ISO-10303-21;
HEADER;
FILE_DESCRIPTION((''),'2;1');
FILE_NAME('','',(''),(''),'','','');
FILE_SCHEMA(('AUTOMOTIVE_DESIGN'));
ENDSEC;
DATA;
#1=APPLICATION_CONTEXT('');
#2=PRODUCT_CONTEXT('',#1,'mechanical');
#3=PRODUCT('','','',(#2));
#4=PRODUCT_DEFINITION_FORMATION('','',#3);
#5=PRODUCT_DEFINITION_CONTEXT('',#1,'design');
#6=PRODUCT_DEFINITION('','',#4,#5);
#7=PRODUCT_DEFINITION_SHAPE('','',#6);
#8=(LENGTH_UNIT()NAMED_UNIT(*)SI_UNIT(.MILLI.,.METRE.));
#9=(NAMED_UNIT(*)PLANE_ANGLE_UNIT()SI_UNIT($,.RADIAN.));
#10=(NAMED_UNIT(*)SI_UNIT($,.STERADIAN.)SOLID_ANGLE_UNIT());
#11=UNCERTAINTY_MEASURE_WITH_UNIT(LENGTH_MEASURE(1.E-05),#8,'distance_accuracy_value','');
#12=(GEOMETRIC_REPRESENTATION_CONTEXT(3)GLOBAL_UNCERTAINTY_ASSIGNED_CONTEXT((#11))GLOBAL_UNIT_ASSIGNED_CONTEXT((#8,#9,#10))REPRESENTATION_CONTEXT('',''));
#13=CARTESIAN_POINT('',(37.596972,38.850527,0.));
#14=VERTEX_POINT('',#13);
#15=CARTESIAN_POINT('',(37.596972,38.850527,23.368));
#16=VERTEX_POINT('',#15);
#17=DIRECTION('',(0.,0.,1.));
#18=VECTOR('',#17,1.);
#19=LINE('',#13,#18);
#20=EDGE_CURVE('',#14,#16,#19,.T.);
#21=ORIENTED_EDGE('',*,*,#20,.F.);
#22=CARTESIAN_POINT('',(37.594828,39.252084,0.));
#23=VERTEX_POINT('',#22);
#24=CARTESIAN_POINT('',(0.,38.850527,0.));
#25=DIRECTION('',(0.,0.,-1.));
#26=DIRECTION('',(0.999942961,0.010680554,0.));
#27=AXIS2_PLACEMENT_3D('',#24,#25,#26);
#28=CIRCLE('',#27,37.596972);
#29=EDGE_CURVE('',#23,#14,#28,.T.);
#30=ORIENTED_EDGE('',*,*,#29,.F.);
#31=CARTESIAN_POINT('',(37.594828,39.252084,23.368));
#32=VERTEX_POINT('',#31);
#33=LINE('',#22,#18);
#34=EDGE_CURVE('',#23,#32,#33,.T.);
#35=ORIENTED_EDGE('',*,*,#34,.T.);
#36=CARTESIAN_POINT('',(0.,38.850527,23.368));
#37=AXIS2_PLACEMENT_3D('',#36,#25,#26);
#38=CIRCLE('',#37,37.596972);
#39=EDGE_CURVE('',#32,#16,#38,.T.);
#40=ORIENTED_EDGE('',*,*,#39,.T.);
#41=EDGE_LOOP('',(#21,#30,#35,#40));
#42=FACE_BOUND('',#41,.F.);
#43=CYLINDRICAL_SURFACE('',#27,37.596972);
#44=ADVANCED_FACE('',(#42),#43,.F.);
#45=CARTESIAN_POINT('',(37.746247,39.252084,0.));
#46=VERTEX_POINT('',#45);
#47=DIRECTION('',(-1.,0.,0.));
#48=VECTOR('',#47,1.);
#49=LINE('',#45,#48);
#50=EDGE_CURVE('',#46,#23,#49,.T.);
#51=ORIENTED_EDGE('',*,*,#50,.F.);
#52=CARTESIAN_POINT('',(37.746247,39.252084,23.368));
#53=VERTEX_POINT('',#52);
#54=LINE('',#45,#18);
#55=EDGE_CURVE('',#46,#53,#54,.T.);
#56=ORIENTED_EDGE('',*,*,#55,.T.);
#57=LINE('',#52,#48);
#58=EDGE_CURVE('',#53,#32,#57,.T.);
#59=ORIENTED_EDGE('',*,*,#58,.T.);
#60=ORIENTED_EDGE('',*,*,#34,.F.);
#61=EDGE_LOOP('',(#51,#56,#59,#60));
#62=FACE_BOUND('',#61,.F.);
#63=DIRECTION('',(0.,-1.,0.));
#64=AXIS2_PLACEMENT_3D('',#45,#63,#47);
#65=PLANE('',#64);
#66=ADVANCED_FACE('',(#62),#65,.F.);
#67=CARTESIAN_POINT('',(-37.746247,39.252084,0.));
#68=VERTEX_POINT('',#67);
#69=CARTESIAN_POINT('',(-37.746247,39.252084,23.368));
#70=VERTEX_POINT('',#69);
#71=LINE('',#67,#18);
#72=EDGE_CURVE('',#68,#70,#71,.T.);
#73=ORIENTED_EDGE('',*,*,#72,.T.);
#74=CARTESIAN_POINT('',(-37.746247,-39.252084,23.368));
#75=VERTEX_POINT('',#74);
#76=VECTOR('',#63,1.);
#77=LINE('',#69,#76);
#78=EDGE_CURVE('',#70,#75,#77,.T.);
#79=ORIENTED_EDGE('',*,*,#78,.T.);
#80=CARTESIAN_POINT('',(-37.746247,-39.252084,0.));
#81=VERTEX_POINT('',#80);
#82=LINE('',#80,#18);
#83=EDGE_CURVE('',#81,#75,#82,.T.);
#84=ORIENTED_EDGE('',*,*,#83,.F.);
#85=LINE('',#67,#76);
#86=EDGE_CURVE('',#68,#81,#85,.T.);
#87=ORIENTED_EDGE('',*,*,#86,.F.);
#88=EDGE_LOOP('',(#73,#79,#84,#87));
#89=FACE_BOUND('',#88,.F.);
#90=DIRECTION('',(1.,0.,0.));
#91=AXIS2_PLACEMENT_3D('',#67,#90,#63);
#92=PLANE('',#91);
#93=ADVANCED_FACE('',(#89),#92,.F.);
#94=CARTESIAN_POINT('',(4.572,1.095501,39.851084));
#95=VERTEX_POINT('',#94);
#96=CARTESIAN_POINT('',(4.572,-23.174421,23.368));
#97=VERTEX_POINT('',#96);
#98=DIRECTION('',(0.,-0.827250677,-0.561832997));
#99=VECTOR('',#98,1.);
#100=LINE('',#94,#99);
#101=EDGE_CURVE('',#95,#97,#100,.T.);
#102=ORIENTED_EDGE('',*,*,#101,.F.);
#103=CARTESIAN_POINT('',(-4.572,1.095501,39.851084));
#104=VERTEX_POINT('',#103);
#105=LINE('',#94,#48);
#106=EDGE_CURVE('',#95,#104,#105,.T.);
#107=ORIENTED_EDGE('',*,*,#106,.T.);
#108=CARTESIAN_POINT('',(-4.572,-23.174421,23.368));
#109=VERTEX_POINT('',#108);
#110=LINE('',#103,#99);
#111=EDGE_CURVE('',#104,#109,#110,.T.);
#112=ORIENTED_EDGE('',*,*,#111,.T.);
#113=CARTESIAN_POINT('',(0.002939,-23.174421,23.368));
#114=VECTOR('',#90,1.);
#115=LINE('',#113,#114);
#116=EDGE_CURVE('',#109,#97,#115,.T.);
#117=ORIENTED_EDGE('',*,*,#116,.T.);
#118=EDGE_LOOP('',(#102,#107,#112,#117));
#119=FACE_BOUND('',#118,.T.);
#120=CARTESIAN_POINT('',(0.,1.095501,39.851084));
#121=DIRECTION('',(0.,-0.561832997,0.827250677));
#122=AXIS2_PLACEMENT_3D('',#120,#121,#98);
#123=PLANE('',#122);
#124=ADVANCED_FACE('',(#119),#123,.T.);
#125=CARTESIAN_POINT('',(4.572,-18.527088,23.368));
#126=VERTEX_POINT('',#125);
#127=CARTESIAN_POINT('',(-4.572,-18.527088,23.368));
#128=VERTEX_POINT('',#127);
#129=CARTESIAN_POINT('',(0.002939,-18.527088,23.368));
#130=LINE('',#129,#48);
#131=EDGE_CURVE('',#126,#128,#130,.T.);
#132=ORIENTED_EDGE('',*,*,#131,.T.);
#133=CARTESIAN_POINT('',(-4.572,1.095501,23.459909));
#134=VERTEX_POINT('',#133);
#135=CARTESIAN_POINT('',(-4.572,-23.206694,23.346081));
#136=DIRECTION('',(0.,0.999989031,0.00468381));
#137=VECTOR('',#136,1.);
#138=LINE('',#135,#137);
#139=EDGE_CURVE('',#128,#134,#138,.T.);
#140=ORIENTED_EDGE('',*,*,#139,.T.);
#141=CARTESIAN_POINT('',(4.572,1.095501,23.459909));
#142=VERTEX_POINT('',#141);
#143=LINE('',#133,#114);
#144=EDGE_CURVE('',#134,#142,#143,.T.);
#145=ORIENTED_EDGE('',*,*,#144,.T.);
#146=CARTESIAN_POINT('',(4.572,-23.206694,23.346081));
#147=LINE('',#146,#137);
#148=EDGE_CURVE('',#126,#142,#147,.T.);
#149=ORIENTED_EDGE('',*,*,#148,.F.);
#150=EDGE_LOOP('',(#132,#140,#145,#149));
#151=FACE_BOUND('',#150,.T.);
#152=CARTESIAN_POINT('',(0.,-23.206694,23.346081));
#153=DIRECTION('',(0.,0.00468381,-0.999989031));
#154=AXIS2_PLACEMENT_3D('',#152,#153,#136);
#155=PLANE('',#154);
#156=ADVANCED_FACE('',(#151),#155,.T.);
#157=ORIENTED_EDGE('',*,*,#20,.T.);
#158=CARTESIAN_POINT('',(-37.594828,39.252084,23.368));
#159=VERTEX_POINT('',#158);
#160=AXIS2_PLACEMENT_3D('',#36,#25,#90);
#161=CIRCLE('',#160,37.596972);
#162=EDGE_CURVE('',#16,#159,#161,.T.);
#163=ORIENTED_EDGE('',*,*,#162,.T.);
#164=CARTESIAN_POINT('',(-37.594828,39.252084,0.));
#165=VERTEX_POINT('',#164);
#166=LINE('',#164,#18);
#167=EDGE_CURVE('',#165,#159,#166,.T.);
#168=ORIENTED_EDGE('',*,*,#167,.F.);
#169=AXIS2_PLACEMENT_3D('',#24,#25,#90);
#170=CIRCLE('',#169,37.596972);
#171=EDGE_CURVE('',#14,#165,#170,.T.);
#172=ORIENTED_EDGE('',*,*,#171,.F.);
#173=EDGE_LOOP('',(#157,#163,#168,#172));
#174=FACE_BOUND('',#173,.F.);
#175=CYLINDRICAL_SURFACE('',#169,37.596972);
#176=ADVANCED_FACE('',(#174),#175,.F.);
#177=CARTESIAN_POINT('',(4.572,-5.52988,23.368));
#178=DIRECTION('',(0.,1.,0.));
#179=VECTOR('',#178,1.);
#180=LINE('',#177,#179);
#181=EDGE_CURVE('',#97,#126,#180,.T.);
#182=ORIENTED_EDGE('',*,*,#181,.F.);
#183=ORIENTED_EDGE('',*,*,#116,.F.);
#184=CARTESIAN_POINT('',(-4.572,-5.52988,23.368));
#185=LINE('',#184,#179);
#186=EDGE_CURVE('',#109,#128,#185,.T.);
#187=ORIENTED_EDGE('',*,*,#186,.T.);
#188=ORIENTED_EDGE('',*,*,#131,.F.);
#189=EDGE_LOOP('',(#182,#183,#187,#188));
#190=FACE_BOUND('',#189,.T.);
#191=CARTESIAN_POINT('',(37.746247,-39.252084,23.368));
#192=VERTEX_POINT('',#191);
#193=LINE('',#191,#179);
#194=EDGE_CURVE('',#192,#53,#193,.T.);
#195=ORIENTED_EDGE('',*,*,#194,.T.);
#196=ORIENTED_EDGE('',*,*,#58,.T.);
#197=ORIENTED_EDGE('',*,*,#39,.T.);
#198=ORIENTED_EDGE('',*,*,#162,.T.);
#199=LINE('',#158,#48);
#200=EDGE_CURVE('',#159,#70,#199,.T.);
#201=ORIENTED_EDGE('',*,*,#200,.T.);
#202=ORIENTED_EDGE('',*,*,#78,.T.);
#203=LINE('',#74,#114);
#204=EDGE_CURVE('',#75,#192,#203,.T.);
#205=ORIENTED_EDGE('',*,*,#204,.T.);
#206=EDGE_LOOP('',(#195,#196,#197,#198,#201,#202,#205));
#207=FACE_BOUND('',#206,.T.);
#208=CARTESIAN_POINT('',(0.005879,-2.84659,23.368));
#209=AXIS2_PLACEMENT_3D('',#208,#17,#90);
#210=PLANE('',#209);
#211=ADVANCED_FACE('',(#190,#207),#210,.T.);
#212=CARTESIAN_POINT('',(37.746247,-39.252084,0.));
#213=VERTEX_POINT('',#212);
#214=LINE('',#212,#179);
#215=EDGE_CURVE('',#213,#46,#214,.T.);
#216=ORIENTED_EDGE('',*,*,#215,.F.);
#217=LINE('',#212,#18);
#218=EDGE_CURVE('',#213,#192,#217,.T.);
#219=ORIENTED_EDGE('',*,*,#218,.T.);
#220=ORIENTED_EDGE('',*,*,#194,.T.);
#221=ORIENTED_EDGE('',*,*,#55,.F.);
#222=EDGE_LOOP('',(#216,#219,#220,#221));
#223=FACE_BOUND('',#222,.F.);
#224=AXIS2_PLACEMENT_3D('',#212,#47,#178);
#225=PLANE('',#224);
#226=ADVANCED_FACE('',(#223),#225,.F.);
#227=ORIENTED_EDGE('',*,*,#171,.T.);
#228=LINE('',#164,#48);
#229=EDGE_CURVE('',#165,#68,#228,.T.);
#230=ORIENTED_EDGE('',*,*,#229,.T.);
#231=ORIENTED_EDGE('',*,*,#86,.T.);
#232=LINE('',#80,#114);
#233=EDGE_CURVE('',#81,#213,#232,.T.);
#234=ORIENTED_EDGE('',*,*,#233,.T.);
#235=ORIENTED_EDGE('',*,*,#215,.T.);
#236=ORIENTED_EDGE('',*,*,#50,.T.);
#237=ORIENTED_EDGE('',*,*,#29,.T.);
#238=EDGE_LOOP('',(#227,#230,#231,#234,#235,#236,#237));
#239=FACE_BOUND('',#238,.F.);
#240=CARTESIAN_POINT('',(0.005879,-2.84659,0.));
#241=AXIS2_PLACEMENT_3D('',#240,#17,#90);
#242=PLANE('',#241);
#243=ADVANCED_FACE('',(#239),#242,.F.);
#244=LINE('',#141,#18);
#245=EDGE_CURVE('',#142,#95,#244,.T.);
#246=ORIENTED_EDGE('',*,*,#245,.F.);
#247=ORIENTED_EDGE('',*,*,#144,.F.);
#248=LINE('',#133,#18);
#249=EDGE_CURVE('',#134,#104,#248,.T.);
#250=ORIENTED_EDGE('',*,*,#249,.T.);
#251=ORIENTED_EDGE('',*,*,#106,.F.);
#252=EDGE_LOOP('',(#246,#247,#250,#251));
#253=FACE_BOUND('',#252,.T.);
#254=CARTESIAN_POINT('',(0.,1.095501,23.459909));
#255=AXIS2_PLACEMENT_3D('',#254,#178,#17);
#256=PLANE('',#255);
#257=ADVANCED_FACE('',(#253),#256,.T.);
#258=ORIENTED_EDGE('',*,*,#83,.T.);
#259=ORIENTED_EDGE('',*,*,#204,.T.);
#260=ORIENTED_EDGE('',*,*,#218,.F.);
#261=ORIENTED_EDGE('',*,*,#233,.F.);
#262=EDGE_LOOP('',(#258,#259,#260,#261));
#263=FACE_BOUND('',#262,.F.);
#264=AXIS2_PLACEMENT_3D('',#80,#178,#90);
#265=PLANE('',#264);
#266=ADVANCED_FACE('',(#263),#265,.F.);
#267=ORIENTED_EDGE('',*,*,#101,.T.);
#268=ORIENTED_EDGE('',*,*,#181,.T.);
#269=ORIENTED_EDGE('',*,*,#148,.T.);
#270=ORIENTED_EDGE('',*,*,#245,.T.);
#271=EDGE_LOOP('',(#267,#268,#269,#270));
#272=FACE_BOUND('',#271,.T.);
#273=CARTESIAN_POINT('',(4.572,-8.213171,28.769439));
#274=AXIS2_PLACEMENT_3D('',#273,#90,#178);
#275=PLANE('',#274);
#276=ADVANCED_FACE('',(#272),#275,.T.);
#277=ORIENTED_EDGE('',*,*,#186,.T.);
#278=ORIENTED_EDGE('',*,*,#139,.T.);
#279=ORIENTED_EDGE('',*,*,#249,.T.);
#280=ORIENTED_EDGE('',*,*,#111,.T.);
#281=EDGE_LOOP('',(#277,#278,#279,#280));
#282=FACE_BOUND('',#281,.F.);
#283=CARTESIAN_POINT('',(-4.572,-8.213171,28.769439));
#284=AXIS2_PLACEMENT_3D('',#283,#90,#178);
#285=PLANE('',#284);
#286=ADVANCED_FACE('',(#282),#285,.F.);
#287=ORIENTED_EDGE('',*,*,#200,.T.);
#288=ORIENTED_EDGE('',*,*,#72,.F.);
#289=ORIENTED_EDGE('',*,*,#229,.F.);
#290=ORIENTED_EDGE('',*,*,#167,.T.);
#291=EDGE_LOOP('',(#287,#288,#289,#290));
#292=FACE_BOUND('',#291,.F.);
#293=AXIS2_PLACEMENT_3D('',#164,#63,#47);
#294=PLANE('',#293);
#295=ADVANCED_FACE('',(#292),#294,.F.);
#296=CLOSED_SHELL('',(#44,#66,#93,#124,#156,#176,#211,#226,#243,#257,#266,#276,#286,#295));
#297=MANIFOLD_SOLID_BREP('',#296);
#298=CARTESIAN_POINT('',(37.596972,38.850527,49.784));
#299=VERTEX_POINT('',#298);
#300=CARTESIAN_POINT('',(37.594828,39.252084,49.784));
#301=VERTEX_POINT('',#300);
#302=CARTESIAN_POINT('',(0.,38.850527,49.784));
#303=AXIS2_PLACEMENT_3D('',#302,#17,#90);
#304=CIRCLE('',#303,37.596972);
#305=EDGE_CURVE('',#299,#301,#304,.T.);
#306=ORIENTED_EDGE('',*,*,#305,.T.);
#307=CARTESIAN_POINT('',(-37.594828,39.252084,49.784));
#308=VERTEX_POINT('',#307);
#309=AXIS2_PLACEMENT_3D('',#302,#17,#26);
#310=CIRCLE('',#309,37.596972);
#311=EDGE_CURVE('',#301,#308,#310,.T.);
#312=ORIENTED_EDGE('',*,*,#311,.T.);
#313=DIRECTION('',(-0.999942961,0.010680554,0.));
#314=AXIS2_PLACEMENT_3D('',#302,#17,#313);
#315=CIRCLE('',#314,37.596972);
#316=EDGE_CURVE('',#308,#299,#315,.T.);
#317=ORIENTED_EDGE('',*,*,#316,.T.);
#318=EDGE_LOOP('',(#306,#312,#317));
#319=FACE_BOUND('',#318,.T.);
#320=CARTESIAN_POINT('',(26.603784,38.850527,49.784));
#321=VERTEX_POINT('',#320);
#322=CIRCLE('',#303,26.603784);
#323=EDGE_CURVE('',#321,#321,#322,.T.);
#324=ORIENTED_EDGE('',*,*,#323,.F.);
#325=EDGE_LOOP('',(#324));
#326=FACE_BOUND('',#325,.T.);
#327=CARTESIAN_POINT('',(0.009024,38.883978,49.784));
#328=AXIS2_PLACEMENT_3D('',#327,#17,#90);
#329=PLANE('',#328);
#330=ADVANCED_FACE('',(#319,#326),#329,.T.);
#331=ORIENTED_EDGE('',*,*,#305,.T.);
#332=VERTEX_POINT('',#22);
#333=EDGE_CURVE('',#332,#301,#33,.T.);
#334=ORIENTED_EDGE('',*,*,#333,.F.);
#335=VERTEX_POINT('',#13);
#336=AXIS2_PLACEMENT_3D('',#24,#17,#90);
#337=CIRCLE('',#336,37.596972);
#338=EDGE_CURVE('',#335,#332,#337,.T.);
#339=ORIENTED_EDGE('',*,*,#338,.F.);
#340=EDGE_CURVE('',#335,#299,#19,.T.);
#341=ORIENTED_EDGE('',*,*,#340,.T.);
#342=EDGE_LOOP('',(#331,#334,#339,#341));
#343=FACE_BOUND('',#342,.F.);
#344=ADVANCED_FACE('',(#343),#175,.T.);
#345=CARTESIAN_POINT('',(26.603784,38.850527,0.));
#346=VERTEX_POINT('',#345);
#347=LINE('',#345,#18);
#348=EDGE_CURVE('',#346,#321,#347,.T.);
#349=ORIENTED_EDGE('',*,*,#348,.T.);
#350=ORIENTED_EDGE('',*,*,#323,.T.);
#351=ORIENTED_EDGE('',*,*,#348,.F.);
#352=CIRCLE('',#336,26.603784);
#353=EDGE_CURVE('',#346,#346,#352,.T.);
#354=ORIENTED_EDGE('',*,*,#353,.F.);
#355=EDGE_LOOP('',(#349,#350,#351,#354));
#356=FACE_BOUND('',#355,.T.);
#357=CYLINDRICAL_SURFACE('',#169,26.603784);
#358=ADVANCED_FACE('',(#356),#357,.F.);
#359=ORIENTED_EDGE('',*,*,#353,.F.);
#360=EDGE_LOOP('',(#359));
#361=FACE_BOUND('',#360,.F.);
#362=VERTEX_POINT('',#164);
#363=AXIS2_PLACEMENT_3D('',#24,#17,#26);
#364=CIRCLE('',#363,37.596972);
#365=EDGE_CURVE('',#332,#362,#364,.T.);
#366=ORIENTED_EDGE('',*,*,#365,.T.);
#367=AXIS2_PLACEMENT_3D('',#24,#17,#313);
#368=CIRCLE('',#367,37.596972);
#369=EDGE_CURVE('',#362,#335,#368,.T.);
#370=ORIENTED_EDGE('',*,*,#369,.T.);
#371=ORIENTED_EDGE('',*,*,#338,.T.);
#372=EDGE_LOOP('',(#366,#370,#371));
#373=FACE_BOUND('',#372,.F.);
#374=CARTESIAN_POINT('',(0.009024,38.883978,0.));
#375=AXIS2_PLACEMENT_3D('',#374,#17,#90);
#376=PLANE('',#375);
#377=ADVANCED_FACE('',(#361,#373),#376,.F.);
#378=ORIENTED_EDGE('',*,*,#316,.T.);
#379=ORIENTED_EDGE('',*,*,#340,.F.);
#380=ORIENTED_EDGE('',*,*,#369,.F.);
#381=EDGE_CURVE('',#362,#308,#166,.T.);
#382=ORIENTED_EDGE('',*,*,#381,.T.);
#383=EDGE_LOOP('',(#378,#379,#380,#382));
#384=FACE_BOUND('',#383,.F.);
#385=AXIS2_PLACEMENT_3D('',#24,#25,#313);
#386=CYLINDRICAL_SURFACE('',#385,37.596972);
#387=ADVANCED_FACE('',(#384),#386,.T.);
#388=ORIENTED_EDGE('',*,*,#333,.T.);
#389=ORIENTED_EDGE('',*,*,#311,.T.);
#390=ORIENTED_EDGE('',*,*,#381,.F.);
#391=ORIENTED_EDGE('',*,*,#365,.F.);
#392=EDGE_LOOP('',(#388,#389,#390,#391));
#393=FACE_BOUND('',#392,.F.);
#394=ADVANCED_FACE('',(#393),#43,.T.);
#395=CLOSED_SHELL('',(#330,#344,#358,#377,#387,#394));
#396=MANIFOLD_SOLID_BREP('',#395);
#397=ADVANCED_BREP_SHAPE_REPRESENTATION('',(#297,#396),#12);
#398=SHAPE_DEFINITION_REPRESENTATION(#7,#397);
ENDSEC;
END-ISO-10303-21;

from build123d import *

# Parameters (mm, degrees)
F0_R     = 26.6037837969
F1_DEPTH = 49.784
F2_DEPTH = 23.368
F4_DEPTH = 4.572


# Not quite as in the source:
# - a feature names something its author has since deleted; it is built from what else it names


with BuildPart() as f1:
    # F0 (on Top) → F1 (new body)
    with BuildSketch(Plane.XY):
        with BuildLine():
            ThreePointArc((-37.5948276361, 39.2520837486), (-0.200781109, 1.2540912614), (37.5969721201, 38.8505272567))
            ThreePointArc((37.5969721201, 38.8505272567), (37.5964359953, 39.0513083657), (37.5948276361, 39.2520837486))
            ThreePointArc((37.5948276361, 39.2520837486), (0, 76.4474993769), (-37.5948276361, 39.2520837486))
        make_face()
        with Locations((0, 38.8505272567)):
            Circle(F0_R, mode=Mode.SUBTRACT)
    extrude(amount=F1_DEPTH)


with BuildPart() as f2:
    # F0 (on Top) → F2 (new body)
    with BuildSketch(Plane.XY):
        with BuildLine():
            ThreePointArc((37.5948276361, 39.2520837486), (37.5964359953, 39.0513083657), (37.5969721201, 38.8505272567))
            ThreePointArc((37.5969721201, 38.8505272567), (-0.200781109, 1.2540912614), (-37.5948276361, 39.2520837486))
            Line((-37.5948276361, 39.2520837486), (-37.7462469041, 39.2520837486))
            Line((-37.7462469041, 39.2520837486), (-37.7462469041, -39.2520837486))
            Line((-37.7462469041, -39.2520837486), (37.7462469041, -39.2520837486))
            Line((37.7462469041, -39.2520837486), (37.7462469041, 39.2520837486))
            Line((37.7462469041, 39.2520837486), (37.5948276361, 39.2520837486))
        make_face()
    extrude(amount=F2_DEPTH)

    # F3 (on Right) → F4 (join, symmetric)
    with BuildSketch(Plane.YZ):
        Polygon((-23.2066940516, 23.3460813761), (1.0955006583, 23.4599094838), (1.0955006583, 39.8510843515), align=None)
    extrude(amount=F4_DEPTH, both=True)


solid = Compound([f1.part, f2.part])
